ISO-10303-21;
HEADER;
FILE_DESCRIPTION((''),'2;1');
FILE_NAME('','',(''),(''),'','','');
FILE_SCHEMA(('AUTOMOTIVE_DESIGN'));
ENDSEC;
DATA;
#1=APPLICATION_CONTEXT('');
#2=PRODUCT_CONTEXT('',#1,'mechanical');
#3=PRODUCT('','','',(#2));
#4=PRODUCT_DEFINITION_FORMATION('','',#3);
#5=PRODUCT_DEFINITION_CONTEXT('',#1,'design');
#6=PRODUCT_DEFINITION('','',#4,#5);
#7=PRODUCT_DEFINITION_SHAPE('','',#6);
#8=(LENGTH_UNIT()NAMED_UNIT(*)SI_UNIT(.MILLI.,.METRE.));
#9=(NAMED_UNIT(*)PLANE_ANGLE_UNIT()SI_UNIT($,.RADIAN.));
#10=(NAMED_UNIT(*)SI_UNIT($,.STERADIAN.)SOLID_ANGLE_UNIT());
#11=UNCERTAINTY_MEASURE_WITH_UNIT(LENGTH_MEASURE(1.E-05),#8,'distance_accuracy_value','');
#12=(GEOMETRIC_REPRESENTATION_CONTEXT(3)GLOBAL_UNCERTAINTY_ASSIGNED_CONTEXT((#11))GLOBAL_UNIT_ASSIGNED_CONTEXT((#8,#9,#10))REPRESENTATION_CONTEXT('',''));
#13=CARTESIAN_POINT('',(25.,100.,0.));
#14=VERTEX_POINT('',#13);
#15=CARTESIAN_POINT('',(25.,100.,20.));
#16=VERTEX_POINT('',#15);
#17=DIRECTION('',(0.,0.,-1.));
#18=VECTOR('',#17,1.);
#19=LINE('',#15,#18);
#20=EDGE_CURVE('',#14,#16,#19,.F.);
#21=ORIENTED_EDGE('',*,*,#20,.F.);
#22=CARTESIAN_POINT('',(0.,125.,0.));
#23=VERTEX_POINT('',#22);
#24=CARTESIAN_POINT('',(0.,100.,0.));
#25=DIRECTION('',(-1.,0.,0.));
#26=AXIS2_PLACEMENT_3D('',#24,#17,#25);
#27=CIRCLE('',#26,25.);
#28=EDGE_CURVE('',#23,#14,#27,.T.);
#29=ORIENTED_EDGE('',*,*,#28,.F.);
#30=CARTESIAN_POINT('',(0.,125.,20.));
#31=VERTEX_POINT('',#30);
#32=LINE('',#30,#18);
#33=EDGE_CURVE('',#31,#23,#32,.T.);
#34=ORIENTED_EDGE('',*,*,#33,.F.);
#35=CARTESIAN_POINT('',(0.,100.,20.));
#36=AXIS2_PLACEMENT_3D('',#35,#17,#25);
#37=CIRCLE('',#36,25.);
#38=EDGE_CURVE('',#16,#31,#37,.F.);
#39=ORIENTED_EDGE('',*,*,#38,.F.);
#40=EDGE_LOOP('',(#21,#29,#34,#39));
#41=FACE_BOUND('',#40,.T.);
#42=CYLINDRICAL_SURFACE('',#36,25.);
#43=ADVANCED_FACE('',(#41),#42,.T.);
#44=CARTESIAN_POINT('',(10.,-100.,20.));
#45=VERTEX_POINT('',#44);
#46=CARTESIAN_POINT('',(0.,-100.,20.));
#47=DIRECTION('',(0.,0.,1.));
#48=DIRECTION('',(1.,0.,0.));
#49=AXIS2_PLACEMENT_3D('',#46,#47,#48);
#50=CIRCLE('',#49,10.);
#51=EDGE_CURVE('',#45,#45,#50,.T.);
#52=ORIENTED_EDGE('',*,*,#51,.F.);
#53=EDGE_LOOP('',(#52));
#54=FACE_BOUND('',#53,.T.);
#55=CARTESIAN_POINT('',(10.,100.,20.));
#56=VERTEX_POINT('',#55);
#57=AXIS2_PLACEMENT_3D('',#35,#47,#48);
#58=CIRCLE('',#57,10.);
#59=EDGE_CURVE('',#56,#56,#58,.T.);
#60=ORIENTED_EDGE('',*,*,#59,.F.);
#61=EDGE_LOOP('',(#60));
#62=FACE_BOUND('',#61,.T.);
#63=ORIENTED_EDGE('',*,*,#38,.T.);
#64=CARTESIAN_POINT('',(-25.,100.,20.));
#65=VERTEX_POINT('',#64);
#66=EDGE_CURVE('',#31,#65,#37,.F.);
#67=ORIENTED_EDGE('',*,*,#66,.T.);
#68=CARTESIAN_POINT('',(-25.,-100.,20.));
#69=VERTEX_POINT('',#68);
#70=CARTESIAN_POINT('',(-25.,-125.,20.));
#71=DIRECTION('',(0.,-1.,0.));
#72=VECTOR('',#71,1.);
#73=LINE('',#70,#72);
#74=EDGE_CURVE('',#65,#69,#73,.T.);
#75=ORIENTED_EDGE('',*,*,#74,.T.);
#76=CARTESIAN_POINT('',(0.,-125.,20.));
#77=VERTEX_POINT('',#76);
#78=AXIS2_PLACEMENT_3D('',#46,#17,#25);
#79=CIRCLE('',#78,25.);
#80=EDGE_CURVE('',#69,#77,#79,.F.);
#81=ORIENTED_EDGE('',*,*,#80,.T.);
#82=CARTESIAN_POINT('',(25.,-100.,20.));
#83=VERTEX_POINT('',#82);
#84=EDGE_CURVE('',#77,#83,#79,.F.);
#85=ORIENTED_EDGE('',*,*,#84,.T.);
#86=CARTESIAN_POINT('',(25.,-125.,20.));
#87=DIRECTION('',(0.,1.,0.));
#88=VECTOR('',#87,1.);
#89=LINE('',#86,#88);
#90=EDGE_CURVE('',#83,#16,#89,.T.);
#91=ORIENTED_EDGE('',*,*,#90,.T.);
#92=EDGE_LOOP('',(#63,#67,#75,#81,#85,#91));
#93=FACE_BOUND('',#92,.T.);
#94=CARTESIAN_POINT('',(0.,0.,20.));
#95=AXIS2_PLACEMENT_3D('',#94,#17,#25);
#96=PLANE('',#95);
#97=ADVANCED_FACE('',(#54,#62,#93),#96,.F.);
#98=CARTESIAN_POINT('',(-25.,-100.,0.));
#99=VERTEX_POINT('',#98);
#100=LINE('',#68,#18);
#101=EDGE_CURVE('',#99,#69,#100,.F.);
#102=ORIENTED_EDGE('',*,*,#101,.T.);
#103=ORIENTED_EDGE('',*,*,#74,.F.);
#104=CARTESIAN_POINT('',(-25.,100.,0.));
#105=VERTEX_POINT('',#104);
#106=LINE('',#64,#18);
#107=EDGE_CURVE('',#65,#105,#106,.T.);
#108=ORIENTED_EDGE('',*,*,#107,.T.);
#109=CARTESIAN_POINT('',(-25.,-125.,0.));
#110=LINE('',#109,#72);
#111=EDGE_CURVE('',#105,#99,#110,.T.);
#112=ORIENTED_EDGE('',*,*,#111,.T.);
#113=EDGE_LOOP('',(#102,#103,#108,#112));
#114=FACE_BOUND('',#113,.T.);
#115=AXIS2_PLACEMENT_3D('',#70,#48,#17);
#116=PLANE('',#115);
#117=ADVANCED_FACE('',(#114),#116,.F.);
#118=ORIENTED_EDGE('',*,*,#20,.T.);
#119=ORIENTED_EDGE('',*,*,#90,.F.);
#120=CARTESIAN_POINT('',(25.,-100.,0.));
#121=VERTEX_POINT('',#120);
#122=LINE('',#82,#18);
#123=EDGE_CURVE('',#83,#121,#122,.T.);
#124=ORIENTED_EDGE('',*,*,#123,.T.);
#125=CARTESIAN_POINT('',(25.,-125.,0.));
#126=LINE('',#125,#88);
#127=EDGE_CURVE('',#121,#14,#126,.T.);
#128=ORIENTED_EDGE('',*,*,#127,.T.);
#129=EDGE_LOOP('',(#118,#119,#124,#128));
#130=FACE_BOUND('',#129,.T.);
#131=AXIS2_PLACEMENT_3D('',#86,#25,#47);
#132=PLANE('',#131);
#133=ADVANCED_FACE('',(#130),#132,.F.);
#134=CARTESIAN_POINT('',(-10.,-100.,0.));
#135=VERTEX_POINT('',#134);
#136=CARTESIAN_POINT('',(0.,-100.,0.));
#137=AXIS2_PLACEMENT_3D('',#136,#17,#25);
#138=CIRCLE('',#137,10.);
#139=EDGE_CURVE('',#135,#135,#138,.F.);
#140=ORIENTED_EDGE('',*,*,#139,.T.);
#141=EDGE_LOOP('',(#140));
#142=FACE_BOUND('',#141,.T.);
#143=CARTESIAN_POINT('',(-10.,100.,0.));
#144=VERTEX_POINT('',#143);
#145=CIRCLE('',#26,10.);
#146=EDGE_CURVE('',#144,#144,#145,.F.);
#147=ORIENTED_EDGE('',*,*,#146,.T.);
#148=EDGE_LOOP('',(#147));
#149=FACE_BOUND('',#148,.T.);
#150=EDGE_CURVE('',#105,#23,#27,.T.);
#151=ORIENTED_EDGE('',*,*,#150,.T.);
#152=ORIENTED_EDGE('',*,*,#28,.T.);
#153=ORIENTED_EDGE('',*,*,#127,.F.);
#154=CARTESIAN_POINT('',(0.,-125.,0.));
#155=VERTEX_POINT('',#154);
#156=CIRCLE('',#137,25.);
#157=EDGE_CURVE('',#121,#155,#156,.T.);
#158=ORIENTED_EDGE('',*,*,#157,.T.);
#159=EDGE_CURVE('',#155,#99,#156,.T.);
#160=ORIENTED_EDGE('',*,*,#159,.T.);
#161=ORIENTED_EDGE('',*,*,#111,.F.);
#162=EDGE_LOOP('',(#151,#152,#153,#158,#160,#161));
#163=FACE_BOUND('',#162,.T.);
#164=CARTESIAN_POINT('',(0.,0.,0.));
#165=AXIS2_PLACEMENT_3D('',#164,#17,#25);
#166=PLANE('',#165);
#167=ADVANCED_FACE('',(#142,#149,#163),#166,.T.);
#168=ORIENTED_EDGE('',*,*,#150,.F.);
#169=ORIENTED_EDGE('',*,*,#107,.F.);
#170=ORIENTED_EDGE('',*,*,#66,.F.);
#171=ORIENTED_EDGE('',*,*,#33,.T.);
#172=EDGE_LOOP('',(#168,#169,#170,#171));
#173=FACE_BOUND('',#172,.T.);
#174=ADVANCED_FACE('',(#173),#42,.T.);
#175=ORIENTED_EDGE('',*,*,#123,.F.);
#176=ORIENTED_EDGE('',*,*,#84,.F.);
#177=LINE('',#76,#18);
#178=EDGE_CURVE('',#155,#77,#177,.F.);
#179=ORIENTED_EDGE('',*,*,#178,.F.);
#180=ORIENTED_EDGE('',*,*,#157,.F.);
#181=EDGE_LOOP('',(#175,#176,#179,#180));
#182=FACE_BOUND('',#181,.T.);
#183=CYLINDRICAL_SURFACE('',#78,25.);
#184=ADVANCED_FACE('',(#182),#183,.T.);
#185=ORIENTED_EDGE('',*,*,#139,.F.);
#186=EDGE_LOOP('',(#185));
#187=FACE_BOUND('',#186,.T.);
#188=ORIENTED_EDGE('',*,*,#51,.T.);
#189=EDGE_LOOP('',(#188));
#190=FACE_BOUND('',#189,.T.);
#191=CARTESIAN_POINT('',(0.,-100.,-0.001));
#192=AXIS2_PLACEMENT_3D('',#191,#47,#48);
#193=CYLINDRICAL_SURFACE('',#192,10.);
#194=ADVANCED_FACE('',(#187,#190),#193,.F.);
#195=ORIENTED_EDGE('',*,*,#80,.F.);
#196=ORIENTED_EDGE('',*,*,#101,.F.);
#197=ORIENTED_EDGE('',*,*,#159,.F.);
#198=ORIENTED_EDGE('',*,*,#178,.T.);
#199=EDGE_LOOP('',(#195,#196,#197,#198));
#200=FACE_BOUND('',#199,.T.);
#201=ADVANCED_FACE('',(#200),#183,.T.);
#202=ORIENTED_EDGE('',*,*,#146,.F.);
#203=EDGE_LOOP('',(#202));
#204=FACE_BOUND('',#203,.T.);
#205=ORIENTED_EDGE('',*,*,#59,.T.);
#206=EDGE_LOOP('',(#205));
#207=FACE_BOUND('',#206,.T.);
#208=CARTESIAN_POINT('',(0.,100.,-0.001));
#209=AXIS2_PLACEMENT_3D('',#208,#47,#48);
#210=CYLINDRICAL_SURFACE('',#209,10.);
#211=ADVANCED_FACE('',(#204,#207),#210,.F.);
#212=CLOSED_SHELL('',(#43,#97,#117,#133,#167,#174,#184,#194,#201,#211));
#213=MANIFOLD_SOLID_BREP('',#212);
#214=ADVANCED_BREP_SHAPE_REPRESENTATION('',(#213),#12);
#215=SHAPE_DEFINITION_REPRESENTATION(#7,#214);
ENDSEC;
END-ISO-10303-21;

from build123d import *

# Parameters (mm, degrees)
ESQUISSE1_W             = 50
ESQUISSE1_H             = 250
BOSS_EXTRU_1_DEPTH      = 20
ENL_V_MAT_EXTRU_1_REACH = 131.035
ESQUISSE2_R             = 10
CONG_1_R                = 25


with BuildPart() as part:
    # Esquisse1 → Boss.-Extru.1 (new body)
    with BuildSketch(Plane.XY):
        Rectangle(ESQUISSE1_W, ESQUISSE1_H)
    extrude(amount=BOSS_EXTRU_1_DEPTH)

    # Esquisse2 → Enlèv. mat.-Extru.1 (cut, up to next)
    with BuildSketch(Plane.XY.offset(20), mode=Mode.PRIVATE) as enl_v_mat_extru_1_sk1:
        with Locations((0, -100)):
            Circle(ESQUISSE2_R)
    enl_v_mat_extru_1_tool1 = extrude(enl_v_mat_extru_1_sk1.sketch, amount=-ENL_V_MAT_EXTRU_1_REACH, mode=Mode.PRIVATE) & part.part
    # Esquisse2 → Enlèv. mat.-Extru.1 (cut, up to next)
    with BuildSketch(Plane.XY.offset(20), mode=Mode.PRIVATE) as enl_v_mat_extru_1_sk2:
        with Locations((0, 100)):
            Circle(ESQUISSE2_R)
    enl_v_mat_extru_1_tool2 = extrude(enl_v_mat_extru_1_sk2.sketch, amount=-ENL_V_MAT_EXTRU_1_REACH, mode=Mode.PRIVATE) & part.part
    add(enl_v_mat_extru_1_tool1.solids().sort_by_distance((0, -100, 20))[0], mode=Mode.SUBTRACT)
    add(enl_v_mat_extru_1_tool2.solids().sort_by_distance((0, 100, 20))[0], mode=Mode.SUBTRACT)

    # Congé1
    cong_1_edges = [part.edges().sort_by_distance(p)[0] for p in [
        (-25, -125, 10),
        (25, -125, 10),
        (-25, 125, 10),
        (25, 125, 10),
    ]]
    fillet(cong_1_edges, radius=CONG_1_R - 0.0001)  # a hair under: the kernel refuses the full size


solid = part.part
